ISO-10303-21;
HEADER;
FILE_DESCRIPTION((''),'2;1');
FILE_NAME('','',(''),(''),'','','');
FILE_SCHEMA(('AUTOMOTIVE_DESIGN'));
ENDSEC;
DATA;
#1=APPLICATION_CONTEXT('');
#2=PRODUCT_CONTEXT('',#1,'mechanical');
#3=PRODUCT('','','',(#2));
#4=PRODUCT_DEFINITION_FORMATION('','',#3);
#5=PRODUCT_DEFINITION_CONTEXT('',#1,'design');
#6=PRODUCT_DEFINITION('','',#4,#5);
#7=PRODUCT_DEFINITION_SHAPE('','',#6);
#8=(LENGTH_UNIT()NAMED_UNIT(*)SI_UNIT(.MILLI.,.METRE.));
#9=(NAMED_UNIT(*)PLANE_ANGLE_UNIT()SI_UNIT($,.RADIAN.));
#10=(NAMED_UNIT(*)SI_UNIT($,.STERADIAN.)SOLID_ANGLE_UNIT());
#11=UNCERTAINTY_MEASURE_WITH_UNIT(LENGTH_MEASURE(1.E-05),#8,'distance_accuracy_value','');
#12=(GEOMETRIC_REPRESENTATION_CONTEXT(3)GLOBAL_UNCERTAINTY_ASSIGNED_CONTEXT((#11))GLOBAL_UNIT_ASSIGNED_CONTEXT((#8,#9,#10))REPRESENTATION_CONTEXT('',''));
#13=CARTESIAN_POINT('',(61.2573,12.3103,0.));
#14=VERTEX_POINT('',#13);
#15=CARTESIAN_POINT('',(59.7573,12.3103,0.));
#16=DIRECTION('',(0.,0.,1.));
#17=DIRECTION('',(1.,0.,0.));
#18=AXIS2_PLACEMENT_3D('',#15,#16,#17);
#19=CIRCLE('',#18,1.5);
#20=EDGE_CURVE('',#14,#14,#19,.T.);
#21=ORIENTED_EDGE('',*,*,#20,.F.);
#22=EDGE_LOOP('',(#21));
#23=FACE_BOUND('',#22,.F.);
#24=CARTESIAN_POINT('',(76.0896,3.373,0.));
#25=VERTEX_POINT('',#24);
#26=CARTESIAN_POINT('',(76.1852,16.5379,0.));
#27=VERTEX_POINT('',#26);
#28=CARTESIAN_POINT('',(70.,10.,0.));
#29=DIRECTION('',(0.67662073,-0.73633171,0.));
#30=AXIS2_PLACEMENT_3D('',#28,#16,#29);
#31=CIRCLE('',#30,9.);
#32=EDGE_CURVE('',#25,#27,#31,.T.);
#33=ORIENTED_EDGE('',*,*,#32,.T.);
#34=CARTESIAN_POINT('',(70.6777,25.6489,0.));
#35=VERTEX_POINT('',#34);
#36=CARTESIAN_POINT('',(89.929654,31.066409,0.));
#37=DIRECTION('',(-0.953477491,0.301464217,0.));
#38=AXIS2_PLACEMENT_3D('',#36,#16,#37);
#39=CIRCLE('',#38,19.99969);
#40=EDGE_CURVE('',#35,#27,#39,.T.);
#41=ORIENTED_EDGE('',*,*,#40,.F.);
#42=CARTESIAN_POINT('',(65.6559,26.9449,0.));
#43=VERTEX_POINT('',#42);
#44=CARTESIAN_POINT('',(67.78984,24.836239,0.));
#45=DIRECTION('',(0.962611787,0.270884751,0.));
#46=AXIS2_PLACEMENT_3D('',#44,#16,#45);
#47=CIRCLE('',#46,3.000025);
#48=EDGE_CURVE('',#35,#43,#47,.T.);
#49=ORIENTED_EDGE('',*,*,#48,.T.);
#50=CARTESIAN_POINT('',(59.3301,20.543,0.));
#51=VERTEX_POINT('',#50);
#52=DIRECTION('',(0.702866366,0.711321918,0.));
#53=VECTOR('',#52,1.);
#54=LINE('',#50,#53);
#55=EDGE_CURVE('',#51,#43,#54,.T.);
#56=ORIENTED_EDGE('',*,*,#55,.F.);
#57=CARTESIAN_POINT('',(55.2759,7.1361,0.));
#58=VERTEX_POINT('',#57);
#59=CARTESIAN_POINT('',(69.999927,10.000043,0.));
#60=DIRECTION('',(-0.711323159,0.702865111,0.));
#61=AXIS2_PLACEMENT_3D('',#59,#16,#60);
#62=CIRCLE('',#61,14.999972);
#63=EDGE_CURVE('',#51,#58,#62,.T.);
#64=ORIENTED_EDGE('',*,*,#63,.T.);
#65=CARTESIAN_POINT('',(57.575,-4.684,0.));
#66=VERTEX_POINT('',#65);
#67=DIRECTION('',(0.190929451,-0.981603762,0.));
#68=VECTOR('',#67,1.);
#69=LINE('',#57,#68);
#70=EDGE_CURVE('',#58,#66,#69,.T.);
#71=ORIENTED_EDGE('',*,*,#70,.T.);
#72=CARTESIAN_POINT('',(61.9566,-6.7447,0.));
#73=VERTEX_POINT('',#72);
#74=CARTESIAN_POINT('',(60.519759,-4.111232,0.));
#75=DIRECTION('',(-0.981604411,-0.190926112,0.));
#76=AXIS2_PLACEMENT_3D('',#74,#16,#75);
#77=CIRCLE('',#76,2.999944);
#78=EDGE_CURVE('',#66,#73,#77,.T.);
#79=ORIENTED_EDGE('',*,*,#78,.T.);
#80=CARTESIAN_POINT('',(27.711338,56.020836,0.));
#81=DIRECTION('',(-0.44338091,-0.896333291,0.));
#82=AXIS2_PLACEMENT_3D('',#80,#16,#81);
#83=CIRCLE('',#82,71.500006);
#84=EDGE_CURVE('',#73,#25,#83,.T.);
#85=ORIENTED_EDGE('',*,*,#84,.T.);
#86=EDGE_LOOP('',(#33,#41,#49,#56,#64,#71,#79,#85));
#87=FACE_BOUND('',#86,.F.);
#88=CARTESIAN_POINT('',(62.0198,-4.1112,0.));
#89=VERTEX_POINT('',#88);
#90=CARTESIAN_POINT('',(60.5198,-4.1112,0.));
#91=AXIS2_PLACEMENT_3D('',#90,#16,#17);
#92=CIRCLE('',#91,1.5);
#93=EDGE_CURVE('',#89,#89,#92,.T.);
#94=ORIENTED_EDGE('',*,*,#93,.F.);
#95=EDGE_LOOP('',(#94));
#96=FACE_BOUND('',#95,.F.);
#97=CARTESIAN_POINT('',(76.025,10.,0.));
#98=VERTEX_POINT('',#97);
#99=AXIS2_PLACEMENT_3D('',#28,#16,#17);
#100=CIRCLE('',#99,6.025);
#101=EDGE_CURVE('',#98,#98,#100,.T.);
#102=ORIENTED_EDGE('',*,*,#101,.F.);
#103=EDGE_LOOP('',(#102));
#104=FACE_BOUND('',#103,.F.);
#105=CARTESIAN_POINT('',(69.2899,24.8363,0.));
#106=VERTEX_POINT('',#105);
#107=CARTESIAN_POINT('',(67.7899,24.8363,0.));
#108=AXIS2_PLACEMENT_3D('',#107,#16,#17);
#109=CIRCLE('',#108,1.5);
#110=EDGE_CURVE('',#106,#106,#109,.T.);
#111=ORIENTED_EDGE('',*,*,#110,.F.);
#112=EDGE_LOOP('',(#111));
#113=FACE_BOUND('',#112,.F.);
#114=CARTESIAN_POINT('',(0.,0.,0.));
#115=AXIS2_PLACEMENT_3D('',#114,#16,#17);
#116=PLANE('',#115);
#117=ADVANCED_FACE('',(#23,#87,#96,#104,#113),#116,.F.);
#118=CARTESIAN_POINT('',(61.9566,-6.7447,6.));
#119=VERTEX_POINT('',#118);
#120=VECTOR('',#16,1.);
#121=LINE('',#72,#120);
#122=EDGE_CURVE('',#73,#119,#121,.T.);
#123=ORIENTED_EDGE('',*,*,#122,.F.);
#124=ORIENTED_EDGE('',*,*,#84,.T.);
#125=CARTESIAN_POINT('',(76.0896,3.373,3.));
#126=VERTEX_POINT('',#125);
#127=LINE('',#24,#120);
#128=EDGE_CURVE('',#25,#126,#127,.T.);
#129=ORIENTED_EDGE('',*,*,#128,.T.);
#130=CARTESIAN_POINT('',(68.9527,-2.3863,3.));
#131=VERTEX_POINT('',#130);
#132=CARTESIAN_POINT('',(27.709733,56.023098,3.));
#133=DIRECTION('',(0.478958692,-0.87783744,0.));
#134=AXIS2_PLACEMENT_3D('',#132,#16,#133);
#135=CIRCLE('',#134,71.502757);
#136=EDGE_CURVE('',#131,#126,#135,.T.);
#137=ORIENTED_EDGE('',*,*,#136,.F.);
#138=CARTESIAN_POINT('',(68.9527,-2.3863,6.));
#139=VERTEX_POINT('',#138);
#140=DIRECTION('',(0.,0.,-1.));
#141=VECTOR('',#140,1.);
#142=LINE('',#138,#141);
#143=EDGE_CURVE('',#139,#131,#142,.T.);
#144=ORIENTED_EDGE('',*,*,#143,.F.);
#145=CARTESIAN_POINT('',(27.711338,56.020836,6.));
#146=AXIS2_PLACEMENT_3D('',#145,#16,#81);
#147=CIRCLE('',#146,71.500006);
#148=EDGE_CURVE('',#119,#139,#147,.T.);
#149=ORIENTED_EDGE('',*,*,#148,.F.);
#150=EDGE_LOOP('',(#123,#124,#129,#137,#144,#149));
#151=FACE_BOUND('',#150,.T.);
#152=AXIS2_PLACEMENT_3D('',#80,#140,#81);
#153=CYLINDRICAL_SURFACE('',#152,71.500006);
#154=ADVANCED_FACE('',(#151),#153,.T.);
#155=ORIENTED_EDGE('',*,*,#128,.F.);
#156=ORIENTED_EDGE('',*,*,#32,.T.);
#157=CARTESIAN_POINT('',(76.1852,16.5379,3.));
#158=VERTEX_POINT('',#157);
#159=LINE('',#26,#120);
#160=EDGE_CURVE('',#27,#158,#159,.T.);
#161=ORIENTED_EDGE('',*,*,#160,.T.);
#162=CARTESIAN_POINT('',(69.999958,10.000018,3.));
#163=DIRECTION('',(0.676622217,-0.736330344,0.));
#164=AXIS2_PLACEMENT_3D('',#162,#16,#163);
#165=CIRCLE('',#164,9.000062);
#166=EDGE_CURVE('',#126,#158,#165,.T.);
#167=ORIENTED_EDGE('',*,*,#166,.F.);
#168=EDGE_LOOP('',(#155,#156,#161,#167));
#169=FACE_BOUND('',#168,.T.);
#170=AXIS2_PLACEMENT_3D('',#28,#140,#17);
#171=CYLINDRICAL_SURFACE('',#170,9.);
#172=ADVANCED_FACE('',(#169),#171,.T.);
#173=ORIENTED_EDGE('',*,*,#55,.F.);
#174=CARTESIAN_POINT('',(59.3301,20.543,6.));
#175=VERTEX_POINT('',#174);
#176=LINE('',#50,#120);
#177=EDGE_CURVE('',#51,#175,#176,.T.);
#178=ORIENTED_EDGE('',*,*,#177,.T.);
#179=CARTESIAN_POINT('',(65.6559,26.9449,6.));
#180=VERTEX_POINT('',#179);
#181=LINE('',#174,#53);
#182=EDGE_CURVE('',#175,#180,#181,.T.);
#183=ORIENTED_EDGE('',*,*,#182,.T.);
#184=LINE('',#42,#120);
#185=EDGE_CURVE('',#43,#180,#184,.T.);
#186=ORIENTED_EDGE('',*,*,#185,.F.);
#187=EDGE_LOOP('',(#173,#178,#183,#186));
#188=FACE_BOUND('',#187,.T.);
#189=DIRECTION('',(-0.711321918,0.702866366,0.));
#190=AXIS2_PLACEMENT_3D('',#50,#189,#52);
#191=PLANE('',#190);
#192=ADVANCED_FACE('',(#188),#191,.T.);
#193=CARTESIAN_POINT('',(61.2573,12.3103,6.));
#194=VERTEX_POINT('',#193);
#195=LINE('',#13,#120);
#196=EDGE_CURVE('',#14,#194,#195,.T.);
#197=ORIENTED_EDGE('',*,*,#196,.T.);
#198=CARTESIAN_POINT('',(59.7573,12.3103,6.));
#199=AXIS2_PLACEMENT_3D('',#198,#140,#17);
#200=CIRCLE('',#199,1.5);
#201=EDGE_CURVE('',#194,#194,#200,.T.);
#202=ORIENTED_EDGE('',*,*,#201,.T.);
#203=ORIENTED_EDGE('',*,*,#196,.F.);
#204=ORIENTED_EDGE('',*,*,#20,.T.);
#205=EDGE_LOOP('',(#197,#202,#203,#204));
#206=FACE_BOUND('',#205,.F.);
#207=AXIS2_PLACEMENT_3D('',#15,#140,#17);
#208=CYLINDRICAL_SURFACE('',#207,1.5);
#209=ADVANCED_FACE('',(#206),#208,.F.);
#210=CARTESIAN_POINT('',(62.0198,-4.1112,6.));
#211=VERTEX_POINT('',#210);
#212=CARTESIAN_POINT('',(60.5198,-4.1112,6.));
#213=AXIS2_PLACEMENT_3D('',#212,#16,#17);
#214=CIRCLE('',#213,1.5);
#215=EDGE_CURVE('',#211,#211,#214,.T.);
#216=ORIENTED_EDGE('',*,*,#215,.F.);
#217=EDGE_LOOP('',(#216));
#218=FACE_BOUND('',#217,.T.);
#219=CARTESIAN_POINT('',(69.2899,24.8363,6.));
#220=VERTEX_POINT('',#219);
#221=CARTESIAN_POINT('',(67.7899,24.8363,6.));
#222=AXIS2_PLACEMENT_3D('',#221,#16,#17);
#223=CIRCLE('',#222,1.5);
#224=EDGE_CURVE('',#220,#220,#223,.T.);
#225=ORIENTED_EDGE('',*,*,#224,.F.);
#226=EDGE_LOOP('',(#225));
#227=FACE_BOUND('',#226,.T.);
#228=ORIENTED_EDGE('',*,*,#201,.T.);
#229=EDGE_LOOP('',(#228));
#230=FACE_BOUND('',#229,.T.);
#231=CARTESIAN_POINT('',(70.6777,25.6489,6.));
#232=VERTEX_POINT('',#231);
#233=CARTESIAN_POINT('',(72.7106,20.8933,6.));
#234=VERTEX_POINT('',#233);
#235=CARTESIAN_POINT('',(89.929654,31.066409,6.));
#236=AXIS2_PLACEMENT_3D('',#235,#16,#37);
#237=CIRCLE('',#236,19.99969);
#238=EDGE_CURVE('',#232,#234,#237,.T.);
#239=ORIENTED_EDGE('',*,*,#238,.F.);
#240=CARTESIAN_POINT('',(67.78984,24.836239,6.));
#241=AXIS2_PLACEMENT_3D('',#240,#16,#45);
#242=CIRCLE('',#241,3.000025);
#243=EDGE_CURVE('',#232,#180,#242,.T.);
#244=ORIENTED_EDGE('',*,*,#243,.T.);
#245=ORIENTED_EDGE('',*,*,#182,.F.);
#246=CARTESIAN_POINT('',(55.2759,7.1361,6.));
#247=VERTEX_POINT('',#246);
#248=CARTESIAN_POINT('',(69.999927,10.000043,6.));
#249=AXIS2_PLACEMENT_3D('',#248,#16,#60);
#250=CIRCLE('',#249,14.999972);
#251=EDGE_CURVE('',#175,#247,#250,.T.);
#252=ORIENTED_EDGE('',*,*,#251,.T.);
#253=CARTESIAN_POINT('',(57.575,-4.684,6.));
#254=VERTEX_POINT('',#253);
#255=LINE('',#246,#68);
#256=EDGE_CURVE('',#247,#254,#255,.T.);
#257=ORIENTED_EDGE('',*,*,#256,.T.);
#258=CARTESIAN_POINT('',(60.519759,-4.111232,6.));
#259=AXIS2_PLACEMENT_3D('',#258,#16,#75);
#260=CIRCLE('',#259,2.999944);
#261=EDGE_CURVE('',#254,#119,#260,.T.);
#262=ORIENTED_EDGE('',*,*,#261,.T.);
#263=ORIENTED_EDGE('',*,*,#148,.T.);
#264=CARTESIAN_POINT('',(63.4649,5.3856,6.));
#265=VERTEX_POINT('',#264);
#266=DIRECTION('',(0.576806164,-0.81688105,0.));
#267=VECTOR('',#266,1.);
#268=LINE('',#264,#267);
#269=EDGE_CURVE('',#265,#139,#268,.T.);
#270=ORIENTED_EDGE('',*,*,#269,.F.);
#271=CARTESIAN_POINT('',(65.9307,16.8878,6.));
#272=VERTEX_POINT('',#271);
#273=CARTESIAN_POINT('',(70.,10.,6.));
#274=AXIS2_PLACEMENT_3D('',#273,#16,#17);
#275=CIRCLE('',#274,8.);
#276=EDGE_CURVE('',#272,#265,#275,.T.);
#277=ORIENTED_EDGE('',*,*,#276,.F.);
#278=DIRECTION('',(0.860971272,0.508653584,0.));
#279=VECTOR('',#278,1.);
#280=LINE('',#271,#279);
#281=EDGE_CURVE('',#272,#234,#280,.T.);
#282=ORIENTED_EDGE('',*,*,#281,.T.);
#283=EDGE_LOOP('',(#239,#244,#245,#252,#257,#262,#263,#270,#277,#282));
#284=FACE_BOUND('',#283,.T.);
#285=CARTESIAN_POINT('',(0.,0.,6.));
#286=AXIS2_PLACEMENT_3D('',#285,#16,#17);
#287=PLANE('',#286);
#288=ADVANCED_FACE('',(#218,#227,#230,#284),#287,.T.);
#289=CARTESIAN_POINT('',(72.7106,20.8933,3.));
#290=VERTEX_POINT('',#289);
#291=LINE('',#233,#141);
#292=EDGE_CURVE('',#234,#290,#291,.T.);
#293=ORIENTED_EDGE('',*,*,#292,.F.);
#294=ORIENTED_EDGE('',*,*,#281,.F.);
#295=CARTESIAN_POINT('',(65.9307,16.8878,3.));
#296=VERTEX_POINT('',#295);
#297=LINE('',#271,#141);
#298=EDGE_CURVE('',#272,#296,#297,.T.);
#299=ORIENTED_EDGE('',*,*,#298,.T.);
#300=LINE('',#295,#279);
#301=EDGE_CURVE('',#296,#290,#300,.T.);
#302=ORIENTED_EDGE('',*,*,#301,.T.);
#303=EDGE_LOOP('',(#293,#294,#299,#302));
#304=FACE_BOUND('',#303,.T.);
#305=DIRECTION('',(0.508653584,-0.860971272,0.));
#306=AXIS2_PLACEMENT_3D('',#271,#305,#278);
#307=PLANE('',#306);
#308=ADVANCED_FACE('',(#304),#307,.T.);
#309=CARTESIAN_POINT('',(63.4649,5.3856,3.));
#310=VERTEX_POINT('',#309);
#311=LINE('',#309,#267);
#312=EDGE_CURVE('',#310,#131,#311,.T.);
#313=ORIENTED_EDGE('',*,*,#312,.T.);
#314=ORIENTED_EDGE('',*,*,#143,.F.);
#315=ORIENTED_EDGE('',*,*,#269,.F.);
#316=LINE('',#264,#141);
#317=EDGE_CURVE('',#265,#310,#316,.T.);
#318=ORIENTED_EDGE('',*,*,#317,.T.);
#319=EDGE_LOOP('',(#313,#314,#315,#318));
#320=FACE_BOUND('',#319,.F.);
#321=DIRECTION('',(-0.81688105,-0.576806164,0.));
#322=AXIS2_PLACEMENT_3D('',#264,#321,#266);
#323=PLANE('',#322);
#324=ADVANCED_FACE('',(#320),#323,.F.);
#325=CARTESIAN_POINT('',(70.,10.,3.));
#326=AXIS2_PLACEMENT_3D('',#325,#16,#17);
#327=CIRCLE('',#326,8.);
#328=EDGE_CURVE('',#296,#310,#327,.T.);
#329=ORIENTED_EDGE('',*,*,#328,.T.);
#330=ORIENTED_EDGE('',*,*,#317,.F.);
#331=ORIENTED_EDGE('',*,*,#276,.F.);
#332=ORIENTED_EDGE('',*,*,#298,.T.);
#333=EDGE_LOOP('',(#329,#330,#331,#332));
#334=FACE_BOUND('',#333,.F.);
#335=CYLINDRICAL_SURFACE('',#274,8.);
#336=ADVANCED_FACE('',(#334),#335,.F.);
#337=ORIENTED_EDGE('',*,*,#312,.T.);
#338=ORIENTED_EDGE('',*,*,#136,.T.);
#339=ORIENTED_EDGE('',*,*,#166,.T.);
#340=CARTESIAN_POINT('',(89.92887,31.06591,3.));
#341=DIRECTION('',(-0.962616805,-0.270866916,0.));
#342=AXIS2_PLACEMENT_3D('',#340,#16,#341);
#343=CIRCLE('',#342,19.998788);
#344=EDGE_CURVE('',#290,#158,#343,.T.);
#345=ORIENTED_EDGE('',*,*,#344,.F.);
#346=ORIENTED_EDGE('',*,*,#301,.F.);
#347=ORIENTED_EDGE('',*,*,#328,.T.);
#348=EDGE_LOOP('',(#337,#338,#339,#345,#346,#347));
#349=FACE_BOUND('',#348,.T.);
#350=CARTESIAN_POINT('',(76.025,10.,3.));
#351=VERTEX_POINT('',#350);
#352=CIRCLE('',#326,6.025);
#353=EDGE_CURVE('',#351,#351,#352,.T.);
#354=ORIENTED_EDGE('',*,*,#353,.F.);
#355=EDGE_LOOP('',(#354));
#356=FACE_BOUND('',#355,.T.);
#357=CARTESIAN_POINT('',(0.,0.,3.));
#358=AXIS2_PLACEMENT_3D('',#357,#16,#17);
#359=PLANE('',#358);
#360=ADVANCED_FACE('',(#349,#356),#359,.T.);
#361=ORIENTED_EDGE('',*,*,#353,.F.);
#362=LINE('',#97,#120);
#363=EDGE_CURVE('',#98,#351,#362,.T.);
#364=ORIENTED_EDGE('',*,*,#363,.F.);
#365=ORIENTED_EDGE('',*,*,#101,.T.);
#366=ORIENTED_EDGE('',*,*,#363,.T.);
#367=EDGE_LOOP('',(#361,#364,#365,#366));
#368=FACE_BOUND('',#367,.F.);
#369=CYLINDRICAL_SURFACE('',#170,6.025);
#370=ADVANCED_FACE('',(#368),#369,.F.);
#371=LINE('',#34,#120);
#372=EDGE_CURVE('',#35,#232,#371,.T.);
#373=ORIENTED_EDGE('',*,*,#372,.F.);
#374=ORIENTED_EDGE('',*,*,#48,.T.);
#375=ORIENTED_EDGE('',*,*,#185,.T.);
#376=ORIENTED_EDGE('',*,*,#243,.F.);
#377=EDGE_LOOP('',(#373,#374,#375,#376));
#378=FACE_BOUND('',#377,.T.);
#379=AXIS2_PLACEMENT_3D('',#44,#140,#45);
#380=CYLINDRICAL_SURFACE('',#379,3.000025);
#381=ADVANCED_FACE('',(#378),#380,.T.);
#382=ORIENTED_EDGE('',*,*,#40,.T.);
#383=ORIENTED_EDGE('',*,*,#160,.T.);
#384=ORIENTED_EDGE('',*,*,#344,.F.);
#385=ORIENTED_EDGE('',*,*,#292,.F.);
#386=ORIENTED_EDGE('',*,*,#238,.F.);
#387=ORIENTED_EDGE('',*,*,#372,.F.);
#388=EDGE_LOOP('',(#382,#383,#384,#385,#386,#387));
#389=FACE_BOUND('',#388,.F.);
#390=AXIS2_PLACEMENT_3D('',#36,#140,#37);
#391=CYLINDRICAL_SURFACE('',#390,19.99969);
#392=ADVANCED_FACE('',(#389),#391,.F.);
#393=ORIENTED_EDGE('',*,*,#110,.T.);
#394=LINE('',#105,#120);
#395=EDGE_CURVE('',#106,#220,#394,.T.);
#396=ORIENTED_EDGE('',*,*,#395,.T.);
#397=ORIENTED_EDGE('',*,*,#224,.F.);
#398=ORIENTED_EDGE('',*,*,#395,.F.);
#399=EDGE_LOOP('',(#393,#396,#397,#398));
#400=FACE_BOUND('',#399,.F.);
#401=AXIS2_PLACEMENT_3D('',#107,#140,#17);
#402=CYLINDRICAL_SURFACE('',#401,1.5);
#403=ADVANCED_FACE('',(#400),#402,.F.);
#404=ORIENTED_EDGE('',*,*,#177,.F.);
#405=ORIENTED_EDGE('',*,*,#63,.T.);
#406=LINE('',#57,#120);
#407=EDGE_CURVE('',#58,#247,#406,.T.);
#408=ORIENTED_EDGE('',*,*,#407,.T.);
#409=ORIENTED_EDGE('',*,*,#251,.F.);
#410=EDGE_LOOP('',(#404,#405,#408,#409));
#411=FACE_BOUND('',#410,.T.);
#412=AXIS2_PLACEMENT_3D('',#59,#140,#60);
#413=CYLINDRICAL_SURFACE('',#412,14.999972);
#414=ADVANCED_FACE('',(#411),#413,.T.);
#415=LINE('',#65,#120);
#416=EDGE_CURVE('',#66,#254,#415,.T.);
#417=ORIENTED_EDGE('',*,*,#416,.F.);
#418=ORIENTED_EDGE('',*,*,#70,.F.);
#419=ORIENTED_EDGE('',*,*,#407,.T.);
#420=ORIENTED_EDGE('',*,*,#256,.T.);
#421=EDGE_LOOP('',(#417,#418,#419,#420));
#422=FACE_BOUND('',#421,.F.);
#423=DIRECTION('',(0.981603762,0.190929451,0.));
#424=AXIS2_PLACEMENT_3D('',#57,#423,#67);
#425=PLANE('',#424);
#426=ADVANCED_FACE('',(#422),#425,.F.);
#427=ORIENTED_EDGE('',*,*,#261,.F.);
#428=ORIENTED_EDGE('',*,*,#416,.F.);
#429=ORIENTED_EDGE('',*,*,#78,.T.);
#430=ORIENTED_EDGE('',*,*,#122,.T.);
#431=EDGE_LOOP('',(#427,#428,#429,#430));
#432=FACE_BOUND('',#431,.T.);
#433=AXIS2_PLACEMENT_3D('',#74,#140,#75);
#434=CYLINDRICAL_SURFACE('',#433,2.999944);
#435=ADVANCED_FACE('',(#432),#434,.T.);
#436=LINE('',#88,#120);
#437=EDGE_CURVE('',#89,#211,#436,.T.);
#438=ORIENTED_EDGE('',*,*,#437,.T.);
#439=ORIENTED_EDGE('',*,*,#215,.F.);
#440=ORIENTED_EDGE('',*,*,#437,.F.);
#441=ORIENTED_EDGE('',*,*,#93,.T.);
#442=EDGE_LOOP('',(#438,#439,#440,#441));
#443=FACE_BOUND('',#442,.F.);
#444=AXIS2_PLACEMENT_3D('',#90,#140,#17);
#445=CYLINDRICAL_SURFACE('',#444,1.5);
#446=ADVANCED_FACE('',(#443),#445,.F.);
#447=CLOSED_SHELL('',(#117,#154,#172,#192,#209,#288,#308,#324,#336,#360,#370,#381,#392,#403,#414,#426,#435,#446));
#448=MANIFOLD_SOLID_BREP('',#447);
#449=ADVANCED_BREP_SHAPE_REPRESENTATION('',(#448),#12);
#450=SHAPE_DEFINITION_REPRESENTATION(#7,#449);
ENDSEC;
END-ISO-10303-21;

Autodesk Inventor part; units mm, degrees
ref_plane "YZ Plane" through (0, 0, 0) normal (1, 0, 0) x (0, 1, 0)
ref_plane "XZ Plane" through (0, 0, 0) normal (0, 1, 0) x (-1, 0, 0)
ref_plane "XY Plane" through (0, 0, 0) normal (0, 0, 1) x (1, 0, 0)
sketch "スケッチ1" plane through (0, 0, 0) normal (0, 0, 1) x (1, 0, 0)
  circle A0 centre (70, 10) radius 6.025
  circle A1 centre (70, 10) radius 9
  arc A2 (70.8604, 37.0956) -> (76.1852, 16.5379) centre (89.93, 31.0664) ccw
  arc A3 (-3.9904, -8.067) -> (76.0896, 3.373) centre (27.7113, 56.0206) ccw
  arc A4 (70.6777, 25.6489) -> (65.6559, 26.9449) centre (67.7899, 24.8363) ccw
  arc A5 (59.3301, 20.543) -> (55.2759, 7.1361) centre (70, 10) ccw
  arc A6 (57.575, -4.684) -> (61.9566, -6.7447) centre (60.5198, -4.1112) ccw
  line L0 (67.7899, 24.8363) -> (70, 10) construction
  line L1 (70, 10) -> (60.5198, -4.1112) construction
  circle A7 centre (67.7899, 24.8363) radius 1.5
  circle A8 centre (60.5198, -4.1112) radius 1.5
  line L2 (70, 10) -> (59.7573, 12.3103) construction
  circle A9 centre (59.7573, 12.3103) radius 1.5
  line L3 (59.3301, 20.543) -> (65.6559, 26.9449)
  line L4 (55.2759, 7.1361) -> (57.575, -4.684)
  point P0 (0, 0)
  point P1 (0, 0)
  dimension "d0" = 3
  dimension "d1" = 3
  dimension "d2" = 3
  dimension "d3" = 3
  dimension "d4" = 3
  dimension "d5" = 15
  dimension "d6" = 17
extrude "押し出し1" add sketch "スケッチ1" along normal blind 6
sketch "スケッチ2" plane through (0, 0, 6) normal (0, 0, 1) x (1, 0, 0)
  point P0 (0, 0)
sketch "スケッチ3" plane through (0, 0, 6) normal (0, 0, 1) x (1, 0, 0)
  line L0 (65.6559, 26.9449) -> (59.3301, 20.543) projected
  arc A0 (59.3301, 20.543) -> (55.2759, 7.1361) centre (70, 10) ccw projected
  line L1 (55.2759, 7.1361) -> (57.575, -4.684) projected
  arc A1 (57.575, -4.684) -> (61.9566, -6.7447) centre (60.5198, -4.1112) ccw projected
  arc A2 (61.9566, -6.7447) -> (76.0896, 3.373) centre (27.7113, 56.0206) ccw projected
  arc A3 (76.0896, 3.373) -> (76.1852, 16.5379) centre (70, 10) ccw projected
  arc A4 (70.6777, 25.6489) -> (76.1852, 16.5379) centre (89.93, 31.0664) ccw projected
  arc A5 (70.6777, 25.6489) -> (65.6559, 26.9449) centre (67.7899, 24.8363) ccw projected
  circle A6 centre (70, 10) radius 6.025 projected
  circle A7 centre (59.7573, 12.3103) radius 1.5 projected
  circle A8 centre (67.7899, 24.8363) radius 1.5 projected
  circle A9 centre (60.5198, -4.1112) radius 1.5 projected
  circle A10 centre (70, 10) radius 8
  line L2 (65.9307, 16.8878) -> (72.7106, 20.8933)
  line L3 (63.4649, 5.3856) -> (68.9527, -2.3863)
  point P0 (0, 0)
  dimension "d9" = 16
extrude "押し出し2" cut sketch "スケッチ3" against normal blind 3 contours A4 A3 A2 L3 A10 L2 | A10
properties part number "前足フレーム補助パーツ" material "アルミニウム 2014-T6"
